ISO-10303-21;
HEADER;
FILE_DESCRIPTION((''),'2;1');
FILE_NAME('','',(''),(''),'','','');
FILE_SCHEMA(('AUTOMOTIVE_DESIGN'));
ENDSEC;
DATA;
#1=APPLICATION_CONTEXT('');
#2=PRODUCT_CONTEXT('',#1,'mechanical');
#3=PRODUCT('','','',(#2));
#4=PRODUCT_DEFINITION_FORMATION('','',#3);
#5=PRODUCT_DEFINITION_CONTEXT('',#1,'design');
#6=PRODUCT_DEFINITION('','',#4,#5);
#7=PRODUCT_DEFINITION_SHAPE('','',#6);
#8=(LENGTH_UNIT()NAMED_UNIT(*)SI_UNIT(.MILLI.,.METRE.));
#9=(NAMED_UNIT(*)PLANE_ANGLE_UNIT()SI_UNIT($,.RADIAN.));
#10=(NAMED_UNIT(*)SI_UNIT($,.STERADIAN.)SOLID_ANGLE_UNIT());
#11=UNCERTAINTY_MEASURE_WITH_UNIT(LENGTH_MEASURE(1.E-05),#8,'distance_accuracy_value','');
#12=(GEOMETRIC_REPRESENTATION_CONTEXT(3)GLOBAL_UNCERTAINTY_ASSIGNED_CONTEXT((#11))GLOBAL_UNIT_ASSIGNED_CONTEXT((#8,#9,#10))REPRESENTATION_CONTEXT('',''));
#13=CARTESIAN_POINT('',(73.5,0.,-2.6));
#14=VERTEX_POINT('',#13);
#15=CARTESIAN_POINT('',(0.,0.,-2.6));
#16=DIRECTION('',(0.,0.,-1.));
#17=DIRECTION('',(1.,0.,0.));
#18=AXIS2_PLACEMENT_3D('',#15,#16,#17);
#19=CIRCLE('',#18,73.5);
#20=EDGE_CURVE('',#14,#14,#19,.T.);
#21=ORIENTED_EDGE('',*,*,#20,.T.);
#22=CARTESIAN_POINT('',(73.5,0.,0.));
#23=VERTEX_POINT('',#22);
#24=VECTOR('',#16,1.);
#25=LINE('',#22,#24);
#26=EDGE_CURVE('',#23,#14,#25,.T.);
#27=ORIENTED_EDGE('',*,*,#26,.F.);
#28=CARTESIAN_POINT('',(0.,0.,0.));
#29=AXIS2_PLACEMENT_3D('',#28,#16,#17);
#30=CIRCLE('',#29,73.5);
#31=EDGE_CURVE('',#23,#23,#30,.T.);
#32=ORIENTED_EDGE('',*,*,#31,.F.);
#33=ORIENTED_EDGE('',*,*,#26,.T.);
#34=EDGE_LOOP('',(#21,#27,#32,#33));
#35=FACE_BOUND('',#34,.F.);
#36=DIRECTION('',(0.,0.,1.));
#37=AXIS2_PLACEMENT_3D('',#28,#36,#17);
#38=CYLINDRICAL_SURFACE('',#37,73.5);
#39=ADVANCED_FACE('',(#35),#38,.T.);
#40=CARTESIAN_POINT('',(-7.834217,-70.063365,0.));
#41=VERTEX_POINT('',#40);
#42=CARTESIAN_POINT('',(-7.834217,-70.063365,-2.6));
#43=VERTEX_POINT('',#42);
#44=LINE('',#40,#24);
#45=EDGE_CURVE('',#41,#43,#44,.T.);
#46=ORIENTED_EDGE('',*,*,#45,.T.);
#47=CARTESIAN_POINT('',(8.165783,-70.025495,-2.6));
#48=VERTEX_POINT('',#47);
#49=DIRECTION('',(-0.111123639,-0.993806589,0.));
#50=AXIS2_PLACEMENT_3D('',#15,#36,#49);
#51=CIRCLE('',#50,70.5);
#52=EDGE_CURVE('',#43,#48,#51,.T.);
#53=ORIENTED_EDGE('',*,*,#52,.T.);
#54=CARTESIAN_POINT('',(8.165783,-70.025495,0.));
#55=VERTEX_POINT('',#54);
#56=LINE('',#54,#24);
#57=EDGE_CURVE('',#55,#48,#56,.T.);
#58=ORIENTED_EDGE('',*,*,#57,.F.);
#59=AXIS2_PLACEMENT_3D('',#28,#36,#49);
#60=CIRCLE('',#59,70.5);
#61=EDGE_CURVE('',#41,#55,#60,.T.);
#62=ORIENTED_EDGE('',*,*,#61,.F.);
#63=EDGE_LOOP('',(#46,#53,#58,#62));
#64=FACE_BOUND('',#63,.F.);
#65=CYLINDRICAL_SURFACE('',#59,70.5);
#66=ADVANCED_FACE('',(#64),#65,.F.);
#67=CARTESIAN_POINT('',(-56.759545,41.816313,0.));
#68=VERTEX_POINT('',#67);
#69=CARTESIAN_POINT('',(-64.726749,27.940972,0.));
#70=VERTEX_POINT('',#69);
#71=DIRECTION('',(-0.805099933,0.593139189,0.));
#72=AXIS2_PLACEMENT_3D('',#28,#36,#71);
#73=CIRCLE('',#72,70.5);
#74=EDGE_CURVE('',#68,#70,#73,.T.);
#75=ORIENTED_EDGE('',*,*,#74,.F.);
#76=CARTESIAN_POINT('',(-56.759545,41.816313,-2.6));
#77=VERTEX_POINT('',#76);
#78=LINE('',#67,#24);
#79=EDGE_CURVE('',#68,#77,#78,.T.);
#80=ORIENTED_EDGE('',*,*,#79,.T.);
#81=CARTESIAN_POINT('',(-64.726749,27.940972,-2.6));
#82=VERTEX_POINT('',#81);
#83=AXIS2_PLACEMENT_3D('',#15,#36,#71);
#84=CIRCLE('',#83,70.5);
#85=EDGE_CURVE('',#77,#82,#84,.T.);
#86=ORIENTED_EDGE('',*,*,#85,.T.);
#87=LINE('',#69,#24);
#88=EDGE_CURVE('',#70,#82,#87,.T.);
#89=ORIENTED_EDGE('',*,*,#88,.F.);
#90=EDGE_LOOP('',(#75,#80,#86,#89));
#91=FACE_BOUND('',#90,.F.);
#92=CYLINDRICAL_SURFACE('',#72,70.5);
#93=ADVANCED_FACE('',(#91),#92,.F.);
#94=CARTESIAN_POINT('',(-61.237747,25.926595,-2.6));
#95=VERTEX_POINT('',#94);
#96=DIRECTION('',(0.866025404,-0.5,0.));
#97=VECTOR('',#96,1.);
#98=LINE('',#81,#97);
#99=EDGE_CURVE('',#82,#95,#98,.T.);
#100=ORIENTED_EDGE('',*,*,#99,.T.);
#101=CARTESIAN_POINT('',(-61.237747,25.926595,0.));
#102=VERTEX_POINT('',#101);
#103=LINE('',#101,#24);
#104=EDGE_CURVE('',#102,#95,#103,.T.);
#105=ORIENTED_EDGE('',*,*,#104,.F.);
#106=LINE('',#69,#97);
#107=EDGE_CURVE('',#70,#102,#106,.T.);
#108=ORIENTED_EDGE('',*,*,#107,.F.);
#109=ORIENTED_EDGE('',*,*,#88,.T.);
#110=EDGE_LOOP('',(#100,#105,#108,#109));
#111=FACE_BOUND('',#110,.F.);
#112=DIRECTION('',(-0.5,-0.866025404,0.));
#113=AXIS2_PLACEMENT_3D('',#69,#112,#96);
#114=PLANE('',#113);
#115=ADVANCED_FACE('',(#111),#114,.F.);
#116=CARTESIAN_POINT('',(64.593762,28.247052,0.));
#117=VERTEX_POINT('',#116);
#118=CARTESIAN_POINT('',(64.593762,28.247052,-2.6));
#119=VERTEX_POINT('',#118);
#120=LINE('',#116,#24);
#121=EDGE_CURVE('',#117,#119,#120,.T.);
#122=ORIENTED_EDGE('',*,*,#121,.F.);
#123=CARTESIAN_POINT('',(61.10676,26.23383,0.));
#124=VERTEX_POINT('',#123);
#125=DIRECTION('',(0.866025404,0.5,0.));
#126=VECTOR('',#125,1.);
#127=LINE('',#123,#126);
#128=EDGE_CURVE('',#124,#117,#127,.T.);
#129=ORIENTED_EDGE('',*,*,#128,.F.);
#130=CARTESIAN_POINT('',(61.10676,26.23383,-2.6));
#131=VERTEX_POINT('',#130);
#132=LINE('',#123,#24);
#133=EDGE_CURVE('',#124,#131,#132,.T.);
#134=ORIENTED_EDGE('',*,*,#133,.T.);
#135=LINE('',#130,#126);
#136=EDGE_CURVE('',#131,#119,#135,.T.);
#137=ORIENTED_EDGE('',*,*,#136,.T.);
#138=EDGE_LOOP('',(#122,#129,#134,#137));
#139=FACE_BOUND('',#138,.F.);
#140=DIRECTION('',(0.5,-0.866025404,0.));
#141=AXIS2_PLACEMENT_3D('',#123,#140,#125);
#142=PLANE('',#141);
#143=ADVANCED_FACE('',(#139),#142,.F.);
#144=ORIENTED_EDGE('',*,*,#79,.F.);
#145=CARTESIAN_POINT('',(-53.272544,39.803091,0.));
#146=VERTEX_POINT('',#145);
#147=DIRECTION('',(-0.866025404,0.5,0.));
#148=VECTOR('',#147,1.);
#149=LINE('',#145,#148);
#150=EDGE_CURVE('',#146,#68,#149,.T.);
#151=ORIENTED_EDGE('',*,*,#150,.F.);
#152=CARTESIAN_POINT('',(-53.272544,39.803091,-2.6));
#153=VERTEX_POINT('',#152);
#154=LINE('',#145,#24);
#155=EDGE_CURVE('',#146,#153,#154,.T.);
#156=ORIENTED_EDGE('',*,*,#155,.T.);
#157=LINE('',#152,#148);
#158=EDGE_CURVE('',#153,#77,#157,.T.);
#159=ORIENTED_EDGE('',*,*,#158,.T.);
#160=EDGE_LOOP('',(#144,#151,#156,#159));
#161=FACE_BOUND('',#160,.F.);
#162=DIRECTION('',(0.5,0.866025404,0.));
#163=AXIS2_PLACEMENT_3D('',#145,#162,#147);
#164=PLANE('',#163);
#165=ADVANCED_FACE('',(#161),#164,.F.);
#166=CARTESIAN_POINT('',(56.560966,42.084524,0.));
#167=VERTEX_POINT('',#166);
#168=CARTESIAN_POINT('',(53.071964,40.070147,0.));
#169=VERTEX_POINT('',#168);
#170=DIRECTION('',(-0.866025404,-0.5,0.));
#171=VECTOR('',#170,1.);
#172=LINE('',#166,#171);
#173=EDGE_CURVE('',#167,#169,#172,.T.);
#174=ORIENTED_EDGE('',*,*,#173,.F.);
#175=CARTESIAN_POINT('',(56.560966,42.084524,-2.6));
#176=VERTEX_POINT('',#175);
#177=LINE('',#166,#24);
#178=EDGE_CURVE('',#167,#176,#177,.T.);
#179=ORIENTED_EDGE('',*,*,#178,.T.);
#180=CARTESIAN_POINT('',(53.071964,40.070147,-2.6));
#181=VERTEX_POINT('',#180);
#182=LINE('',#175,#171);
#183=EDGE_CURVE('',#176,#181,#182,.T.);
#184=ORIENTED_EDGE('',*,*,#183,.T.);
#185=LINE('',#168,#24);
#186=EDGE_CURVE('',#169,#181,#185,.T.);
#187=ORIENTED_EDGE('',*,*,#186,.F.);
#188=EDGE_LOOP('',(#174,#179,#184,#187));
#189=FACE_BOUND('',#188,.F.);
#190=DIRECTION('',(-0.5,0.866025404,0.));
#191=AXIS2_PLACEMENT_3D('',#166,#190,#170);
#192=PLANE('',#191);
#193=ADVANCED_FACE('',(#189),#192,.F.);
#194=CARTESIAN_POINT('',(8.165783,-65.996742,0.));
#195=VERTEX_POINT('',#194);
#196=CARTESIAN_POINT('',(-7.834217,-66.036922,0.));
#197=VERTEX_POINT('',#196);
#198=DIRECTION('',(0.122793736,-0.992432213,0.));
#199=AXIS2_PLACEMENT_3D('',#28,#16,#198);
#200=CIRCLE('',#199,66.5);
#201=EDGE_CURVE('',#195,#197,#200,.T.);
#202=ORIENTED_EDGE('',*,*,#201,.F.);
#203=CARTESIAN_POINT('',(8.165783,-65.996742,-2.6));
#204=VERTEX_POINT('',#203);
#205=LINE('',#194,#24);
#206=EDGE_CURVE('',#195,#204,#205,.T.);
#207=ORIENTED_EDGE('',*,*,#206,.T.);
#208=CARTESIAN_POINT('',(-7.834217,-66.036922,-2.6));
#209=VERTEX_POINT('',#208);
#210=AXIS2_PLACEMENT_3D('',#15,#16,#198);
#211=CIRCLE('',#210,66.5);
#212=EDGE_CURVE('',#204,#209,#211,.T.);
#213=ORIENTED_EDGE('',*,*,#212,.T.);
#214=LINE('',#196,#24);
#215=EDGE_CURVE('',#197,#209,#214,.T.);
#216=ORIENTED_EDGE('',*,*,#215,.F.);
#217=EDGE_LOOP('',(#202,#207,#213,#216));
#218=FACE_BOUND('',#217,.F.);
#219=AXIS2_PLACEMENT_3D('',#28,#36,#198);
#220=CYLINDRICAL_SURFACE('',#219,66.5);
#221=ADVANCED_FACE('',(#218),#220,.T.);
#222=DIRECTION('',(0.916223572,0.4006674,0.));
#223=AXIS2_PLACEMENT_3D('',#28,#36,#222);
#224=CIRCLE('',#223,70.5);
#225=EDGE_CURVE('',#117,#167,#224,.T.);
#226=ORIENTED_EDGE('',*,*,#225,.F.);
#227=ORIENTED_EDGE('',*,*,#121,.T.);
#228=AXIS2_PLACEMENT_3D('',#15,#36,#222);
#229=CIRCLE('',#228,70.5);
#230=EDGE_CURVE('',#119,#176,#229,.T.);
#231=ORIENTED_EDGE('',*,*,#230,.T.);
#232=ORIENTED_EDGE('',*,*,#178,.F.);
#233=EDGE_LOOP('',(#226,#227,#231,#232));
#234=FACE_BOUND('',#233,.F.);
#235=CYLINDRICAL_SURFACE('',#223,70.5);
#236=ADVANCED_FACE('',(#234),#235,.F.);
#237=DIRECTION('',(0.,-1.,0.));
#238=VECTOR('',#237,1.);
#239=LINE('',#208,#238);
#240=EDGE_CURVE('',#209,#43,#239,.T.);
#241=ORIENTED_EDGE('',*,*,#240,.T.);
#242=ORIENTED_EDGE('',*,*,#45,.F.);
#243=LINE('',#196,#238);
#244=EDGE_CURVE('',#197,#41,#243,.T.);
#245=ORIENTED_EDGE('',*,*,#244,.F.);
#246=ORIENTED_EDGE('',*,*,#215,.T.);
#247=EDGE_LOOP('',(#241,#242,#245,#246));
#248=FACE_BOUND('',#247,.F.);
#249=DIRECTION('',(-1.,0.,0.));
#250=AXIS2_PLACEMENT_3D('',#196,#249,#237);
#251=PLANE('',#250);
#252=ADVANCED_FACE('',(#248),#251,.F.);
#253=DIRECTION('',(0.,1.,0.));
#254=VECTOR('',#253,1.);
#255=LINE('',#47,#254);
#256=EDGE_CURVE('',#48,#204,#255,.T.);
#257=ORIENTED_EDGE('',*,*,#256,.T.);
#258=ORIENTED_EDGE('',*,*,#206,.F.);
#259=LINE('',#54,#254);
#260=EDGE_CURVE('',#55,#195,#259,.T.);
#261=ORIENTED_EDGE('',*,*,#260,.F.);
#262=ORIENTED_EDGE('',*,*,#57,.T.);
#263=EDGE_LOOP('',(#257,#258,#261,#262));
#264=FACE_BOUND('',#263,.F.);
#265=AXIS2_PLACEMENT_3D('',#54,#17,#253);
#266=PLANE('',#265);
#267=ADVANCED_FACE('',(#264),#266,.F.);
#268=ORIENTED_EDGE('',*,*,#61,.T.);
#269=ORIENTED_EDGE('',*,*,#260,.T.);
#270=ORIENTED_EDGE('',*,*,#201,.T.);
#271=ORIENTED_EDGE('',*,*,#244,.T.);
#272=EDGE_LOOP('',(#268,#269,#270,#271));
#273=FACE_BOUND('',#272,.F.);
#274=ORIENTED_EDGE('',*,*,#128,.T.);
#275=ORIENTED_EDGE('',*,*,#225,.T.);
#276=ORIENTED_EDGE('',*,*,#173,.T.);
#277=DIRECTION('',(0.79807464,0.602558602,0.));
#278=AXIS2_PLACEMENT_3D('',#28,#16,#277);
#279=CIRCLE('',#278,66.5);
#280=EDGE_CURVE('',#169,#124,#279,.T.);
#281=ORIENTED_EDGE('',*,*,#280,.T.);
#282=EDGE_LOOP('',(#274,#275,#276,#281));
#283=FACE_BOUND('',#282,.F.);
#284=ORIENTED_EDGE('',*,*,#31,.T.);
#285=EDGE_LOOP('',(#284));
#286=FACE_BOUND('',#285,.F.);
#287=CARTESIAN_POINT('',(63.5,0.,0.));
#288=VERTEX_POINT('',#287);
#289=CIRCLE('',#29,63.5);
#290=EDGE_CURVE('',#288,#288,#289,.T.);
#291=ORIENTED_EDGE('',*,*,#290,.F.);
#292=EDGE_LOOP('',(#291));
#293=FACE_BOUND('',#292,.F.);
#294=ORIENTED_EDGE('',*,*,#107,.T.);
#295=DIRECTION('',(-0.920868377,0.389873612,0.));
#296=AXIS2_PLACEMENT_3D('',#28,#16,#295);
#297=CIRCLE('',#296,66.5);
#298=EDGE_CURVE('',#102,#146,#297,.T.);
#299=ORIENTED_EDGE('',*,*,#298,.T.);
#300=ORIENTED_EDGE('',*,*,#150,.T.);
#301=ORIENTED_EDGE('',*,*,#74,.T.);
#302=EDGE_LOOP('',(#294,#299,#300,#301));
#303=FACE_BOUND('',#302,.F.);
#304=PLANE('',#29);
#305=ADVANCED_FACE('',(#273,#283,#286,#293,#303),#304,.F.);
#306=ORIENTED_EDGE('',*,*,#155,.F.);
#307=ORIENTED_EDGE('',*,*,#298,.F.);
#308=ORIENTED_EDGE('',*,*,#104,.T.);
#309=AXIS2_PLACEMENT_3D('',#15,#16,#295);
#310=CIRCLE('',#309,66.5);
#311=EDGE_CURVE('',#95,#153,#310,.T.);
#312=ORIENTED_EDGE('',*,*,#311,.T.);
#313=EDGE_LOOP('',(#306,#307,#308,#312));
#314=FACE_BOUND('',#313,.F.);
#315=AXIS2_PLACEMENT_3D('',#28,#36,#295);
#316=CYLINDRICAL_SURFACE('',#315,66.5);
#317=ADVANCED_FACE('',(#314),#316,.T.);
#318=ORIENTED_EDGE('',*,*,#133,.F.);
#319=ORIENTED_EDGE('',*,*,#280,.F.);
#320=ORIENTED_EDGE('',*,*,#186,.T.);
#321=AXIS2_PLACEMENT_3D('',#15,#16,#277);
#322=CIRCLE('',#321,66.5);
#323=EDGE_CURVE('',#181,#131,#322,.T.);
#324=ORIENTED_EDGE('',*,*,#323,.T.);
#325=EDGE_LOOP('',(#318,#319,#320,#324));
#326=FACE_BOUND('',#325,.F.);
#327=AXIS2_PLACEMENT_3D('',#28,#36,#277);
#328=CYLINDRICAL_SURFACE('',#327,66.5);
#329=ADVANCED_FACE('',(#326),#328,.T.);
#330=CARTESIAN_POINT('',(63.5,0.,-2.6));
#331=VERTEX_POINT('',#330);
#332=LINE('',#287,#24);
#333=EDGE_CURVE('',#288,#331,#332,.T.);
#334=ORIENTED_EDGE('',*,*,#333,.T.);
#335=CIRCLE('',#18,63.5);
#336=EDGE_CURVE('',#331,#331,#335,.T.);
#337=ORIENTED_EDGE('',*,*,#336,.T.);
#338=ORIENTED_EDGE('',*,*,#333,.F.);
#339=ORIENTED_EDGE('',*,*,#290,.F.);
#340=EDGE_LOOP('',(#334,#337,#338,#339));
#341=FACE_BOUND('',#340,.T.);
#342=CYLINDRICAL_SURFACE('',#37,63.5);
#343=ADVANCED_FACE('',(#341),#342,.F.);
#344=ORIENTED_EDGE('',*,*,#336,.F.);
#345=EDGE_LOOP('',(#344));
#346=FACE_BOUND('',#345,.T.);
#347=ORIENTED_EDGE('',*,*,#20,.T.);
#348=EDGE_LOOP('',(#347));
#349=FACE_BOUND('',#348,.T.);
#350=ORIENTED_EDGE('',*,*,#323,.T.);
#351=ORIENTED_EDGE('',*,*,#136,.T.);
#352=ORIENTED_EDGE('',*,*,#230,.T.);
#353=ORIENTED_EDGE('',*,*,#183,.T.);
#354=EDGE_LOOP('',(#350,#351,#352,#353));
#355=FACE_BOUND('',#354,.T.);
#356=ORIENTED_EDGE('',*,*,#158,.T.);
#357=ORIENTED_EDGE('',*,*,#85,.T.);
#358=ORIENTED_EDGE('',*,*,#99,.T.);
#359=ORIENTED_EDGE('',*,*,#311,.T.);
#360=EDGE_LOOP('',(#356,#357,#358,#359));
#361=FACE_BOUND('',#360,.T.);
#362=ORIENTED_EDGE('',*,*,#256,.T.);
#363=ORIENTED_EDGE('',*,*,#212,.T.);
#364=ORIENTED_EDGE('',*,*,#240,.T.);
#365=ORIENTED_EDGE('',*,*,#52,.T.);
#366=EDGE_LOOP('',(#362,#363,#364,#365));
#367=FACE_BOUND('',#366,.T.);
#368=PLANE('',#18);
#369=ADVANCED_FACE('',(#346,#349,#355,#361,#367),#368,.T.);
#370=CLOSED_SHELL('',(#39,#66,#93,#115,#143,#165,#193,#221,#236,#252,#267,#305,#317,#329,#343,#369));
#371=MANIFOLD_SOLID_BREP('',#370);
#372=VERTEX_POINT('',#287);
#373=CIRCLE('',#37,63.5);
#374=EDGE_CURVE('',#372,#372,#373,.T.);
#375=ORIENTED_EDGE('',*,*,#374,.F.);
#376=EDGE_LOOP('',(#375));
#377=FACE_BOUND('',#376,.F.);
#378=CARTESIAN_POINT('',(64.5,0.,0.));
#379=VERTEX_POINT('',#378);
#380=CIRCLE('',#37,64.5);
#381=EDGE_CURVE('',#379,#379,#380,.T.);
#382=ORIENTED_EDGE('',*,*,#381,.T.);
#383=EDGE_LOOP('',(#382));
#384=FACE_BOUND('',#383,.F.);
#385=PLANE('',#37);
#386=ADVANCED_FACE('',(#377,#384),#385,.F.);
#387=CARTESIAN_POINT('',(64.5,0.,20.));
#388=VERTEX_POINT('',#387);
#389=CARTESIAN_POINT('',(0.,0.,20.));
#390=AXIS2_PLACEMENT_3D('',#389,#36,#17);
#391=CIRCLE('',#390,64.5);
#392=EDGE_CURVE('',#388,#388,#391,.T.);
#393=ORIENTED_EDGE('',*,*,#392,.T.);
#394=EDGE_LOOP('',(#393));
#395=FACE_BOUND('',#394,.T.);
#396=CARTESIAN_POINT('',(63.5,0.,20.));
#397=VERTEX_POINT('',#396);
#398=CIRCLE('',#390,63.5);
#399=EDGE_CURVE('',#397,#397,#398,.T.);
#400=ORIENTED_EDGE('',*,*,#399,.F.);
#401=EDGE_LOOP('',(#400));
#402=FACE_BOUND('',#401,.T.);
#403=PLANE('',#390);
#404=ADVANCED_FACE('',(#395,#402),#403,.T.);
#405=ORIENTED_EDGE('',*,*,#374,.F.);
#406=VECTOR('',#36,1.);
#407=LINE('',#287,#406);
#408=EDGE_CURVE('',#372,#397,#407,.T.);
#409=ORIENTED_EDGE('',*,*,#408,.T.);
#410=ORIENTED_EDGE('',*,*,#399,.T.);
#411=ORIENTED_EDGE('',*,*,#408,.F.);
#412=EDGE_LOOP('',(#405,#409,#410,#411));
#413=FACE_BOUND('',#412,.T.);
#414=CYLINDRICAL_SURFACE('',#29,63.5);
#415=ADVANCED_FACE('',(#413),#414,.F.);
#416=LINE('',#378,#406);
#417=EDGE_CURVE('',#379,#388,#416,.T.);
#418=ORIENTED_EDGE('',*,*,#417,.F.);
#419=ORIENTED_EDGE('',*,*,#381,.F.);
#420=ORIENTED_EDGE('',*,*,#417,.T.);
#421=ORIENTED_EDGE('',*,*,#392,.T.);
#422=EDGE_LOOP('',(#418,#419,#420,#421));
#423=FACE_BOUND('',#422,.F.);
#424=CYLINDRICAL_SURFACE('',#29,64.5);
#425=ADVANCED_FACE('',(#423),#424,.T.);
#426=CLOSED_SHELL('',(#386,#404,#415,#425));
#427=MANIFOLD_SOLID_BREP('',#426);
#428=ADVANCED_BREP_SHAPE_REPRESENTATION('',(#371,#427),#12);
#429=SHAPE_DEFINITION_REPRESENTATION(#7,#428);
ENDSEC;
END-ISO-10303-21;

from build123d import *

# Parameters (mm, degrees)
F0_R     = 64.5
F0_R_2   = 63.5
F1_DEPTH = 20
F2_R     = 73.5
F2_R_2   = 64.5
F2_R_3   = 63.5
F3_DEPTH = 2.6


with BuildPart() as f1:
    # F0 (on Top) → F1 (new body)
    with BuildSketch(Plane.XY):
        Circle(F0_R)
        Circle(F0_R_2, mode=Mode.SUBTRACT)
    extrude(amount=F1_DEPTH)


with BuildPart() as f3:
    # F2 (on face) → F3 (new body)
    with BuildSketch(Plane(origin=(0, 0, 0), x_dir=(1, 0, 0), z_dir=(0, 0, -1))):
        Circle(F2_R)
        with BuildLine():
            Line((-53.272543663, -39.8030914839), (-56.759545298, -41.8163128165))
            ThreePointArc((-56.759545298, -41.8163128165), (-61.1380505803, -35.1053951871), (-64.7267495, -27.9409716932))
            Line((-64.7267495, -27.9409716932), (-61.2377470377, -25.9265951823))
            ThreePointArc((-61.2377470377, -25.9265951823), (-57.6740058995, -33.1052721407), (-53.272543663, -39.8030914839))
        make_face(mode=Mode.SUBTRACT)
        with BuildLine():
            Line((61.1067602057, -26.2338303944), (64.5937618407, -28.2470517271))
            ThreePointArc((64.5937618407, -28.2470517271), (60.971189332, -35.3944073469), (56.5609660427, -42.0845235248))
            Line((56.5609660427, -42.0845235248), (53.0719635804, -40.070147014))
            ThreePointArc((53.0719635804, -40.070147014), (57.5070096228, -33.3945181766), (61.1067602057, -26.2338303944))
        make_face(mode=Mode.SUBTRACT)
        Circle(F2_R_2, mode=Mode.SUBTRACT)
        with BuildLine():
            Line((-7.8342165427, 66.0369218783), (-7.8342165427, 70.0633645435))
            ThreePointArc((-7.8342165427, 70.0633645435), (0.1668612483, 70.4998025339), (8.1657834573, 70.025495218))
            Line((8.1657834573, 70.025495218), (8.1657834573, 65.9967421963))
            ThreePointArc((8.1657834573, 65.9967421963), (0.1669962767, 66.4997903173), (-7.8342165427, 66.0369218783))
        make_face(mode=Mode.SUBTRACT)
        Circle(F2_R_2)
        Circle(F2_R_3, mode=Mode.SUBTRACT)
    extrude(amount=F3_DEPTH)


solid = Compound([f1.part, f3.part])
